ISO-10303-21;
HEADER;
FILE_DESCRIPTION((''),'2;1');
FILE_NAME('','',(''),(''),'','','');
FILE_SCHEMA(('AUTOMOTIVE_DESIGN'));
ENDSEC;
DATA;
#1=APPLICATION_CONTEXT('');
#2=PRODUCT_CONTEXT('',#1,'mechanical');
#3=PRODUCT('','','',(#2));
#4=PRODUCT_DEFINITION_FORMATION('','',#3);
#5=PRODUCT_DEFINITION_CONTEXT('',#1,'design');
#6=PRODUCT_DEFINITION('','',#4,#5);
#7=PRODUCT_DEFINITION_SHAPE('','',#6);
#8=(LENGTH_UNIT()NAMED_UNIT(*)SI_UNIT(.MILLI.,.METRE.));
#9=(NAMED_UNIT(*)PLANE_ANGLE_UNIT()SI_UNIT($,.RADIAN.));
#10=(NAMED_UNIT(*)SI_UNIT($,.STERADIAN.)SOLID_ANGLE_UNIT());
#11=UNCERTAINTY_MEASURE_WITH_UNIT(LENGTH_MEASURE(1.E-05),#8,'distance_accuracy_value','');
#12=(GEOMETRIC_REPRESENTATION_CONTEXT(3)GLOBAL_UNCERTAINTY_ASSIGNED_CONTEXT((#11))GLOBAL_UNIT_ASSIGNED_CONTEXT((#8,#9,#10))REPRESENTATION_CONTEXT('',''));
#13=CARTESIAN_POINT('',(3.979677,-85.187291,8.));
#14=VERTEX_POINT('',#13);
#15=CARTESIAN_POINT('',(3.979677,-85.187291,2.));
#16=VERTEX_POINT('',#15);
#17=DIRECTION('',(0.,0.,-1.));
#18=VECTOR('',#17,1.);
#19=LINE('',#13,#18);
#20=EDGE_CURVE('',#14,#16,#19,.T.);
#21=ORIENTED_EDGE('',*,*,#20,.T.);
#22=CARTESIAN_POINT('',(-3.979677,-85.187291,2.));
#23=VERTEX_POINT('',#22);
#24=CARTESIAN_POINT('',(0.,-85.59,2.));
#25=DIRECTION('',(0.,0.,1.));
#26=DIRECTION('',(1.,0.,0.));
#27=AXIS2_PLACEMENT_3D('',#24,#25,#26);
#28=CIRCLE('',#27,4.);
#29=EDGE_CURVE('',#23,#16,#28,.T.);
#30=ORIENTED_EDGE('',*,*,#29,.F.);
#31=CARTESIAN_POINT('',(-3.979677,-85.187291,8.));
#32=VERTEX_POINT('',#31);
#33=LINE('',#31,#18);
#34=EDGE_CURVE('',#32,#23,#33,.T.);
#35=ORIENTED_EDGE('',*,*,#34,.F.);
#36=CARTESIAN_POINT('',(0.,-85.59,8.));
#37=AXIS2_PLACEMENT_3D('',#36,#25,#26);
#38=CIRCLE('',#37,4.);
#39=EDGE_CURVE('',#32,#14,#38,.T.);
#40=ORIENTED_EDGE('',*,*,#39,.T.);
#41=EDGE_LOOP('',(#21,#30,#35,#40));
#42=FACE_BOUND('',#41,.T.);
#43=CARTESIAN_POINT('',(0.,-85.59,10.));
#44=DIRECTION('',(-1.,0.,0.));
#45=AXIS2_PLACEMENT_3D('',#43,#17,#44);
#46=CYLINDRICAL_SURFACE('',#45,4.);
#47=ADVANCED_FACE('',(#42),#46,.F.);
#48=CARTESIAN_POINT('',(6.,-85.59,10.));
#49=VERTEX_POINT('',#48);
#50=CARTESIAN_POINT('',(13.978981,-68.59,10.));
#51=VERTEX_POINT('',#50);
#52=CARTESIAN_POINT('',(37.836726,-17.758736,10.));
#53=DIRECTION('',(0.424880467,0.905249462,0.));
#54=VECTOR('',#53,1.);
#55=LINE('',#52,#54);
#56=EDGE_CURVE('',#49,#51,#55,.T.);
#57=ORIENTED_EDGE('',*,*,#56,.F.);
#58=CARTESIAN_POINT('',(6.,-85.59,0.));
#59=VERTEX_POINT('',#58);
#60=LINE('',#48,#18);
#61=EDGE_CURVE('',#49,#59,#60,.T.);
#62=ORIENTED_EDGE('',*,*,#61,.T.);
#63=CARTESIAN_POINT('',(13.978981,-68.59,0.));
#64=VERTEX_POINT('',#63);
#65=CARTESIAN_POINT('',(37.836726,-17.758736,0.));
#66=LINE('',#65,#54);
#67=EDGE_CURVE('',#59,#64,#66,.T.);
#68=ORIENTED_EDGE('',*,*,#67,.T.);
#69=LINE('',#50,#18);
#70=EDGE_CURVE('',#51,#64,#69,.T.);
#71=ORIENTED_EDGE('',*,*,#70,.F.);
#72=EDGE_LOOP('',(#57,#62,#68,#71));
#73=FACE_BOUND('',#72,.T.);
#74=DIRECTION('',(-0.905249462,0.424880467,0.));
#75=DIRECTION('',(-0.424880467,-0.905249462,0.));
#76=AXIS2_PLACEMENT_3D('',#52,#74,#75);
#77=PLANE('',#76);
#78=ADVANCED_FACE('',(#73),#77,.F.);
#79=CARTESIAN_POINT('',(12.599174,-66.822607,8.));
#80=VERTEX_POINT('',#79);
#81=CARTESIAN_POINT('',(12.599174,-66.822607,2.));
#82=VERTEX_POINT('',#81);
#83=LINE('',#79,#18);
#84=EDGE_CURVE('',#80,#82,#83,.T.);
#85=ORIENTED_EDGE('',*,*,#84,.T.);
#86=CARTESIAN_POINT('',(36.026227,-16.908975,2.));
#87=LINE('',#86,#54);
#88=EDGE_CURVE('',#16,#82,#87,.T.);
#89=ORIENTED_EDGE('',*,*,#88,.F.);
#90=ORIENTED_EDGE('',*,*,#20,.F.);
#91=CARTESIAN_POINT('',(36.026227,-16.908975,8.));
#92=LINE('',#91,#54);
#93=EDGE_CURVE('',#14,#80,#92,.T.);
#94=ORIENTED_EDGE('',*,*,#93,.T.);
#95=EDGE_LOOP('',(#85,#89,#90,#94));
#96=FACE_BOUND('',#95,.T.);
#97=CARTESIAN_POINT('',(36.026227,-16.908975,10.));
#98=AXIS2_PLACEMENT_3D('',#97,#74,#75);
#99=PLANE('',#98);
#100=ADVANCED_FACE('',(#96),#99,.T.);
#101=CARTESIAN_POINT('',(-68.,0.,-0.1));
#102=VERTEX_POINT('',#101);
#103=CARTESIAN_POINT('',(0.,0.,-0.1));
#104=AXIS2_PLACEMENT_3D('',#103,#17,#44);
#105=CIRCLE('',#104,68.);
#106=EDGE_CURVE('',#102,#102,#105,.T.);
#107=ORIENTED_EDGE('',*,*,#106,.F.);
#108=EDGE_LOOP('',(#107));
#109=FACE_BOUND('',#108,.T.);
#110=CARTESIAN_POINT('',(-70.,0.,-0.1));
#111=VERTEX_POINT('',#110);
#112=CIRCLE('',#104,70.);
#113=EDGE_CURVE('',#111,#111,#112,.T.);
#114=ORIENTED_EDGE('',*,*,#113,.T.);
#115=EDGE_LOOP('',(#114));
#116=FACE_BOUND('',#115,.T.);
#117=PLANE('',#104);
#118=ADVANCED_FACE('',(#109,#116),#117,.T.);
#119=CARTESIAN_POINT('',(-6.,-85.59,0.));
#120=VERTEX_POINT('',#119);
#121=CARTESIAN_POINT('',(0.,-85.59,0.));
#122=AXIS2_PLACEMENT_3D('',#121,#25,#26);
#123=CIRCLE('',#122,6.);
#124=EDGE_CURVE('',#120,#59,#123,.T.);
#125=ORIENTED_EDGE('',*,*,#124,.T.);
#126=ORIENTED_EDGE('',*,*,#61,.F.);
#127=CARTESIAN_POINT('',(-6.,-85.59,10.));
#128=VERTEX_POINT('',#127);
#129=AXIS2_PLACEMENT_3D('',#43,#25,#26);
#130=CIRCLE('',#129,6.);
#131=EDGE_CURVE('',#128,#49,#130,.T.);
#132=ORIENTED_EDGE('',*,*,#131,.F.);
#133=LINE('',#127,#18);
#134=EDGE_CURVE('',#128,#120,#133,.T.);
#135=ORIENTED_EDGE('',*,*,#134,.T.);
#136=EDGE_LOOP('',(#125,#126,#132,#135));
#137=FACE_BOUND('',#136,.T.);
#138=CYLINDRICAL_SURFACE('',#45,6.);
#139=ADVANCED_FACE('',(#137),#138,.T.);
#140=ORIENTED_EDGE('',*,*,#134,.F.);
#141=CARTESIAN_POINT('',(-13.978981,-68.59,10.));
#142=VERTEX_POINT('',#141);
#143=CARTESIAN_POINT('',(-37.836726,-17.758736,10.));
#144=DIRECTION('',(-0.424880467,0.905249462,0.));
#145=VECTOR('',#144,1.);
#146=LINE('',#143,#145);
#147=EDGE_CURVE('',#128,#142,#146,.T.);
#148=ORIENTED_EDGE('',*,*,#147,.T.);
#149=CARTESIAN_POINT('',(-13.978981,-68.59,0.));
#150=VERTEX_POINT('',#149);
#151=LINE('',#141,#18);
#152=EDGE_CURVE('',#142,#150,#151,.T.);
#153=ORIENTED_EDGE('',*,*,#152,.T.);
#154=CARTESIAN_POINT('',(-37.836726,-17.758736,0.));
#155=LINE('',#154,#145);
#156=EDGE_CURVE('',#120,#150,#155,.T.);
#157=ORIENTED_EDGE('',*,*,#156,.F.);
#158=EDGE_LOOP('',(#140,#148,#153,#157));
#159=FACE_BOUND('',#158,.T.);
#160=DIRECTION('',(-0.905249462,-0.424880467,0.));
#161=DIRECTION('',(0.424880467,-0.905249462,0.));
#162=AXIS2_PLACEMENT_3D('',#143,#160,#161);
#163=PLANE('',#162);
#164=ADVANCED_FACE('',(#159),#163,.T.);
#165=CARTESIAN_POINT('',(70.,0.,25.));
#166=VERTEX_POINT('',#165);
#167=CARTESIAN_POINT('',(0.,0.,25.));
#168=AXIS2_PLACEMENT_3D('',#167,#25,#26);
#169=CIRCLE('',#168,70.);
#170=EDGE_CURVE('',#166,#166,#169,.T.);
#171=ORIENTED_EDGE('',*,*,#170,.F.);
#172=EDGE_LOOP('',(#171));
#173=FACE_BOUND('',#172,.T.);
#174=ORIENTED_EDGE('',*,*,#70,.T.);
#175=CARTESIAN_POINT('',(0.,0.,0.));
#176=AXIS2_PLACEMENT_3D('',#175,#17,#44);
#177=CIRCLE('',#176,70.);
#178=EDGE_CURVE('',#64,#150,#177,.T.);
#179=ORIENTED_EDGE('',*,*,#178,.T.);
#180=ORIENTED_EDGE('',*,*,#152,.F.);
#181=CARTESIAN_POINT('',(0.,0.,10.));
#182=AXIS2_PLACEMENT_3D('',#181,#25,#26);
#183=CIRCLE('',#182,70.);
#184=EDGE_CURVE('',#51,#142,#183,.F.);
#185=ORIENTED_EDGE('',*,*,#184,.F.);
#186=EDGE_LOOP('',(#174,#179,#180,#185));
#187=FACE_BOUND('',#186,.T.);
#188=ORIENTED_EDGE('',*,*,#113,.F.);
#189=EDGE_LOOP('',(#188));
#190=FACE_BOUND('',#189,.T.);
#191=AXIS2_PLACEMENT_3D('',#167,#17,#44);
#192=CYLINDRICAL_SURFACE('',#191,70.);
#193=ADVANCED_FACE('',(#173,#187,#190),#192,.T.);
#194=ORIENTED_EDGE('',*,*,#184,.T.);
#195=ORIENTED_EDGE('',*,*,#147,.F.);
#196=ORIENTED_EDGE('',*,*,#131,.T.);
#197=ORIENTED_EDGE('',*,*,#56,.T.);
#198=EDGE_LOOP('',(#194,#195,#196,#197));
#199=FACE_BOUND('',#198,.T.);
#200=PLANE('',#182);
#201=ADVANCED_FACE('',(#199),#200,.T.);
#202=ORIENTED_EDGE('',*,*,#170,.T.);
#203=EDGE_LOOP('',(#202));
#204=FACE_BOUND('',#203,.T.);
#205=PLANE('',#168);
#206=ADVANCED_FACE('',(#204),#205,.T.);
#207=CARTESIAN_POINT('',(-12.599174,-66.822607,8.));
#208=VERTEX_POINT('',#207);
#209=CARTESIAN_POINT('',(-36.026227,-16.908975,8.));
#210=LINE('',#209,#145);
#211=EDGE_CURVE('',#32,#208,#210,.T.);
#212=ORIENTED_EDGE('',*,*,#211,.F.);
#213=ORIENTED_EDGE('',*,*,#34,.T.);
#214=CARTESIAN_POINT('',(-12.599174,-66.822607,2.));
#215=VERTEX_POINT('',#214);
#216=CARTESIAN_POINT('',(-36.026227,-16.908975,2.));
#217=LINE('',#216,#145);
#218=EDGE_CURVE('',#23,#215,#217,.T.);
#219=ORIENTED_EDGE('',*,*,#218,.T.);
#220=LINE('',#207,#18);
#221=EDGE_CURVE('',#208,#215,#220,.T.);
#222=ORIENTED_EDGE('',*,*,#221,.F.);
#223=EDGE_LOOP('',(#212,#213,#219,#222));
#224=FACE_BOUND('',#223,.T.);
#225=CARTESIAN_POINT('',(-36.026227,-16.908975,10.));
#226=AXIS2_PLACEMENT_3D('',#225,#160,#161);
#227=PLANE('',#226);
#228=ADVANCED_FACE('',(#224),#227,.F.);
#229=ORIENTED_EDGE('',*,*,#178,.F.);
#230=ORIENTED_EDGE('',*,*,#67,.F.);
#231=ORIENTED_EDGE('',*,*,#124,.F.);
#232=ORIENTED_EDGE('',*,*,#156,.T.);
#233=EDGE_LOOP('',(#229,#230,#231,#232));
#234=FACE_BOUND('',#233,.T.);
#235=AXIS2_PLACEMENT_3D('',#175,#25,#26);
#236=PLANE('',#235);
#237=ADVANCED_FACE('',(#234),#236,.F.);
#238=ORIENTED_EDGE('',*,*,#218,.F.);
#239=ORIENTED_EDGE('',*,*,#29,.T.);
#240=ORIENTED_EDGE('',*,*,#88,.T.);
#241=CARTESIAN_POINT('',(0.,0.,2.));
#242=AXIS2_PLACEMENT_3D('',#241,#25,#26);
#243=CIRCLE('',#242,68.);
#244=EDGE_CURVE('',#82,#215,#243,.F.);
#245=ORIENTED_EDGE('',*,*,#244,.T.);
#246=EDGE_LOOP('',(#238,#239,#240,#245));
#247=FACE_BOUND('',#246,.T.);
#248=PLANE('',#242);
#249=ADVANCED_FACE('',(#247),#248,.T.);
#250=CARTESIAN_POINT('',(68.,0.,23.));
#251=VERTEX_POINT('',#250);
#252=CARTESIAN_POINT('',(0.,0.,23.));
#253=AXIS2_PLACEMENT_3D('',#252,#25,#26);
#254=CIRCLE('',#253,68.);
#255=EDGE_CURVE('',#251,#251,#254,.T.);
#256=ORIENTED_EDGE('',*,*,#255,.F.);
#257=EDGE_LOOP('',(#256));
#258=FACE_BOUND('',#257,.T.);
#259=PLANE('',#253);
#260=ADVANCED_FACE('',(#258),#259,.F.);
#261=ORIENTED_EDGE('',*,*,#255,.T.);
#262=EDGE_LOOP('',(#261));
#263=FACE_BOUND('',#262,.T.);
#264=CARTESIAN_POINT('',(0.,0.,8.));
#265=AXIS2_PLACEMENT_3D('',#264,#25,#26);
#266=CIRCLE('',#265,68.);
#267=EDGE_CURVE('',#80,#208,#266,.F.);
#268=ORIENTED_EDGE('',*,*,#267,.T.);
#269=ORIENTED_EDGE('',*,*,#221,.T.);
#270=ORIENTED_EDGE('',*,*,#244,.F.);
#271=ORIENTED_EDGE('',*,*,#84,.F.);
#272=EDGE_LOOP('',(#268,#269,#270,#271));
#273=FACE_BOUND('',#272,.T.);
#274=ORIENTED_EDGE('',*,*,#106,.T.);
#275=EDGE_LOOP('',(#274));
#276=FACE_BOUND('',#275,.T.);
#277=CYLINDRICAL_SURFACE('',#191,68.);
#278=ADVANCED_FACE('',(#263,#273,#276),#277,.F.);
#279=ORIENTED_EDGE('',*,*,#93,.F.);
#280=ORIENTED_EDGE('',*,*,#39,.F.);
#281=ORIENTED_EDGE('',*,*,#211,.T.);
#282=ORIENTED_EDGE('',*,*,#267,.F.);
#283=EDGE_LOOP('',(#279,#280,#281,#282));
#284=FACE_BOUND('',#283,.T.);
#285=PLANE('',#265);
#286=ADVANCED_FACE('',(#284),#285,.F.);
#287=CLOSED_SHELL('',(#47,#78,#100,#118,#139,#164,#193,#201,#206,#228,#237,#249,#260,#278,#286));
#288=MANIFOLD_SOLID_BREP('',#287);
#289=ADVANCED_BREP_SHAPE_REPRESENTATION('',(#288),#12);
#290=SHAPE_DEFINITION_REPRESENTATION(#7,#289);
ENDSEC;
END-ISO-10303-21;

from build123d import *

# Parameters (mm, degrees)
SKETCH1_R           = 70
BOSS_EXTRUDE1_DEPTH = 25
BOSS_EXTRUDE2_DEPTH = 10
BOSS_EXTRUDE3_START = 0.1
SKETCH27_R          = 70
BOSS_EXTRUDE3_DEPTH = 0.1
SHELL3_START        = -0.1
SHELL3_OUTLINE_R    = 68
SHELL3_DEPTH        = 23.1
SHELL3_START_2      = 2
SHELL3_2_DEPTH      = 6


# Read off the part's stored shape, not the designer's step: Shell3
with BuildPart() as part:
    # Sketch1 → Boss-Extrude1 (new body)
    with BuildSketch(Plane.XY):
        Circle(SKETCH1_R)
    extrude(amount=BOSS_EXTRUDE1_DEPTH)

    # Sketch21 → Boss-Extrude2 (add)
    with BuildSketch(Plane.XY):
        with BuildLine():
            Line((-13.97898065, -68.59), (-6, -85.59))
            ThreePointArc((-6, -85.59), (0, -91.59), (6, -85.59))
            Line((6, -85.59), (13.97898065, -68.59))
            ThreePointArc((13.97898065, -68.59), (0, -70), (-13.97898065, -68.59))
        make_face()
    extrude(amount=BOSS_EXTRUDE2_DEPTH)

    # Sketch27 → Boss-Extrude3 (add)
    with BuildSketch(Plane(origin=(0, 0, 0), x_dir=(-1, 0, 0), z_dir=(0, 0, -1)).offset(BOSS_EXTRUDE3_START)):
        Circle(SKETCH27_R)
    extrude(amount=-BOSS_EXTRUDE3_DEPTH)

    # Shell3 outline → Shell3 (cut)
    with BuildSketch(Plane.XY.offset(SHELL3_START)):
        Circle(SHELL3_OUTLINE_R)
    extrude(amount=SHELL3_DEPTH, mode=Mode.SUBTRACT)

    # Shell3 2 outline → Shell3 2 (cut)
    with BuildSketch(Plane.XY.offset(SHELL3_START_2)):
        with BuildLine():
            ThreePointArc((12.599173957, -66.82260707), (0, -68), (-12.599173957, -66.82260707))
            Line((-12.599173957, -66.82260707), (-3.979676533, -85.187290811))
            ThreePointArc((-3.979676533, -85.187290811), (0, -89.59), (3.979676533, -85.187290811))
            Line((3.979676533, -85.187290811), (12.599173957, -66.82260707))
        make_face()
    extrude(amount=SHELL3_2_DEPTH, mode=Mode.SUBTRACT)


solid = part.part
